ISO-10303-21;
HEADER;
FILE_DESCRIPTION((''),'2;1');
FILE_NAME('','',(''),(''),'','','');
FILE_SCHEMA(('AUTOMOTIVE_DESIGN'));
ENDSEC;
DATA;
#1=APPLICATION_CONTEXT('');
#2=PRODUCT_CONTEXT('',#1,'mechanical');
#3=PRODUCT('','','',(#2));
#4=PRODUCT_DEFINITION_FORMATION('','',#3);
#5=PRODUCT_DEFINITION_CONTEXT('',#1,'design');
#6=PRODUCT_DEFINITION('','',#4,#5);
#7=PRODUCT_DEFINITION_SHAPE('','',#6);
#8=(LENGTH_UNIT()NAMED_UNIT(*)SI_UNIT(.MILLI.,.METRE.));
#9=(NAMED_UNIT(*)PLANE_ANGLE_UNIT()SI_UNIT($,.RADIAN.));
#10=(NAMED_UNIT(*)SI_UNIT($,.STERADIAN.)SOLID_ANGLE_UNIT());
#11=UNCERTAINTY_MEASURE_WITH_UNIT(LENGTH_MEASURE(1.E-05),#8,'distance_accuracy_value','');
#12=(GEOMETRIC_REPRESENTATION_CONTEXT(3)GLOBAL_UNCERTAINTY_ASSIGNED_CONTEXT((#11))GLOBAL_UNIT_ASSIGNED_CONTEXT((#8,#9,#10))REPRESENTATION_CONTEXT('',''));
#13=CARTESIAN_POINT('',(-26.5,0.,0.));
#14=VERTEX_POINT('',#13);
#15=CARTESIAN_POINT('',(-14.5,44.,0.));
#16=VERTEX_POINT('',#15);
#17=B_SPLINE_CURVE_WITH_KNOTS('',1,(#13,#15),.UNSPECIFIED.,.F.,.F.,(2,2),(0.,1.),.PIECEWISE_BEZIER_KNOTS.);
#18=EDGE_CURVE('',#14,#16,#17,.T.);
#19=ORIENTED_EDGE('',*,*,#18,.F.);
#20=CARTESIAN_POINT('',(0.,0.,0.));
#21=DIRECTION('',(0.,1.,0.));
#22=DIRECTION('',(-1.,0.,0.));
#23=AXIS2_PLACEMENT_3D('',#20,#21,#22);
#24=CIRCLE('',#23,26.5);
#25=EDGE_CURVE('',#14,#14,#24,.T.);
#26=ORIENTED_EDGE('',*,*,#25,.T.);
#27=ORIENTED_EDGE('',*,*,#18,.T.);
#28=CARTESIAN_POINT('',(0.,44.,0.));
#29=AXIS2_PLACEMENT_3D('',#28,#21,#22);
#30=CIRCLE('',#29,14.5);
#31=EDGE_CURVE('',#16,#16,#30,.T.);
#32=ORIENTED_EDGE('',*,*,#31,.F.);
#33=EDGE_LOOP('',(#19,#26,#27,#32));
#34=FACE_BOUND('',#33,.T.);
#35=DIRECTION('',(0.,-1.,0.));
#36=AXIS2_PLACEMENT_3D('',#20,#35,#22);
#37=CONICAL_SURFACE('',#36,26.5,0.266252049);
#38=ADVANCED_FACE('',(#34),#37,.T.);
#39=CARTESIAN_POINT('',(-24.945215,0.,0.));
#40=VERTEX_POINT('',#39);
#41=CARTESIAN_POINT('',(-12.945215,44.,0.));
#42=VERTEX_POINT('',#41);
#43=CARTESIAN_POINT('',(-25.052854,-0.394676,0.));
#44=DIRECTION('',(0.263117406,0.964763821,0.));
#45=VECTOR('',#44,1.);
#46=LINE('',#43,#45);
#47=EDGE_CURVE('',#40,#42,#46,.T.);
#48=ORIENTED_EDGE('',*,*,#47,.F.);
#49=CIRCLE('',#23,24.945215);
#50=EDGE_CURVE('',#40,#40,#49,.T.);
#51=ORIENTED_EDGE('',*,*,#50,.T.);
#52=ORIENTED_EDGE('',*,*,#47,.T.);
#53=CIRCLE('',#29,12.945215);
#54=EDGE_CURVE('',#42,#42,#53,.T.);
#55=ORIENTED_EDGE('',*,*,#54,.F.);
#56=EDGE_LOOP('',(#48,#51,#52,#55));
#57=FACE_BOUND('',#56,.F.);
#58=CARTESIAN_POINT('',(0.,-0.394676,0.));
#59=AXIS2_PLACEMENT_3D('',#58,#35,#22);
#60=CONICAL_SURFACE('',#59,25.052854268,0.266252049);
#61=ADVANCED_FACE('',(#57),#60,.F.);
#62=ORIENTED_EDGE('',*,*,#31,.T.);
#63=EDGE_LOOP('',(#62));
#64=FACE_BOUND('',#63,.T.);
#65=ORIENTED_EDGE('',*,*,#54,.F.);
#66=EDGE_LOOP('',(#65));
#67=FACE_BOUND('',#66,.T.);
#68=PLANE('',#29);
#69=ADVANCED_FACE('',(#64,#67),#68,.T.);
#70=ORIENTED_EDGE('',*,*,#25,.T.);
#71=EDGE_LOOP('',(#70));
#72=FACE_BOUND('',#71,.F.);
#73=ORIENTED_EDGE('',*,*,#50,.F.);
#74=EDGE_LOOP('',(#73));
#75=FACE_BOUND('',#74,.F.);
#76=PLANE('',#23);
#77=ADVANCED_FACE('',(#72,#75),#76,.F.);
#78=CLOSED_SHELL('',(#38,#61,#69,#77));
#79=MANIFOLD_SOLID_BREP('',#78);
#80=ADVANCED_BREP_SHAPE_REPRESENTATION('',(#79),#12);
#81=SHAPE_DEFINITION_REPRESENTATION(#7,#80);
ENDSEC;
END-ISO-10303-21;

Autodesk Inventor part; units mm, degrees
ref_plane "YZ Plane" through (0, 0, 0) normal (1, 0, 0) x (0, 1, 0)
ref_plane "XY Plane" through (0, 0, 0) normal (0, 0, 1) x (1, 0, 0)
sketch "Szkic6" plane through (0, 0, 0) normal (0, 1, 0) x (-1, 0, 0)
  circle A0 centre (0, 0) radius 26.5
  dimension "d33" = 53
ref_plane "Płaszczyzna konstrukcyjna1" through (0, 44, 0) normal (0, 1, 0) x (-1, 0, 0)
sketch "Szkic7" plane through (0, 44, 0) normal (0, 1, 0) x (-1, 0, 0)
  circle A0 centre (0, 0) radius 14.5
  dimension "d35" = 29
loft "Wyciągnięcie złożone1" add profiles "Szkic6", "Szkic7"
shell "Skorupa1" thickness 1.5 removed faces 2 at (1.052, 44, -3.5603) at (-1.8199, 0, -2.5499)
equation "\"d33\" = OD1"
equation "\"d35\" = OD2"
equation "\"d52\" = THK"
equation "\"SzerokośćGięciaPodcięcia\" = Grubość"
equation "\"RozmiarPodcięciaNarożnika\" = 4 * Grubość"
equation "\"PromieńPrzejścia\" = PromieńGięcia"
equation "\"Rozmiar_promienia_Jacobiego\" = PromieńGięcia"
equation "\"Wielk_odstępu\" = Grubość"
equation "\"d2\" = PromieńGięcia"
equation "\"d23\" = PromieńGięcia"
equation "\"OD1\" = 53"
equation "\"OD2\" = 29"
equation "\"L\" = 44"
equation "\"THK\" = 1.5"
equation "\"d34\" = L"
equation "\"Grubość\" = 1.5"
equation "\"PromieńGięcia\" = 3"
properties part number "Redukcja symetryczna Ø53x29x1,5 L=44" material "304"
